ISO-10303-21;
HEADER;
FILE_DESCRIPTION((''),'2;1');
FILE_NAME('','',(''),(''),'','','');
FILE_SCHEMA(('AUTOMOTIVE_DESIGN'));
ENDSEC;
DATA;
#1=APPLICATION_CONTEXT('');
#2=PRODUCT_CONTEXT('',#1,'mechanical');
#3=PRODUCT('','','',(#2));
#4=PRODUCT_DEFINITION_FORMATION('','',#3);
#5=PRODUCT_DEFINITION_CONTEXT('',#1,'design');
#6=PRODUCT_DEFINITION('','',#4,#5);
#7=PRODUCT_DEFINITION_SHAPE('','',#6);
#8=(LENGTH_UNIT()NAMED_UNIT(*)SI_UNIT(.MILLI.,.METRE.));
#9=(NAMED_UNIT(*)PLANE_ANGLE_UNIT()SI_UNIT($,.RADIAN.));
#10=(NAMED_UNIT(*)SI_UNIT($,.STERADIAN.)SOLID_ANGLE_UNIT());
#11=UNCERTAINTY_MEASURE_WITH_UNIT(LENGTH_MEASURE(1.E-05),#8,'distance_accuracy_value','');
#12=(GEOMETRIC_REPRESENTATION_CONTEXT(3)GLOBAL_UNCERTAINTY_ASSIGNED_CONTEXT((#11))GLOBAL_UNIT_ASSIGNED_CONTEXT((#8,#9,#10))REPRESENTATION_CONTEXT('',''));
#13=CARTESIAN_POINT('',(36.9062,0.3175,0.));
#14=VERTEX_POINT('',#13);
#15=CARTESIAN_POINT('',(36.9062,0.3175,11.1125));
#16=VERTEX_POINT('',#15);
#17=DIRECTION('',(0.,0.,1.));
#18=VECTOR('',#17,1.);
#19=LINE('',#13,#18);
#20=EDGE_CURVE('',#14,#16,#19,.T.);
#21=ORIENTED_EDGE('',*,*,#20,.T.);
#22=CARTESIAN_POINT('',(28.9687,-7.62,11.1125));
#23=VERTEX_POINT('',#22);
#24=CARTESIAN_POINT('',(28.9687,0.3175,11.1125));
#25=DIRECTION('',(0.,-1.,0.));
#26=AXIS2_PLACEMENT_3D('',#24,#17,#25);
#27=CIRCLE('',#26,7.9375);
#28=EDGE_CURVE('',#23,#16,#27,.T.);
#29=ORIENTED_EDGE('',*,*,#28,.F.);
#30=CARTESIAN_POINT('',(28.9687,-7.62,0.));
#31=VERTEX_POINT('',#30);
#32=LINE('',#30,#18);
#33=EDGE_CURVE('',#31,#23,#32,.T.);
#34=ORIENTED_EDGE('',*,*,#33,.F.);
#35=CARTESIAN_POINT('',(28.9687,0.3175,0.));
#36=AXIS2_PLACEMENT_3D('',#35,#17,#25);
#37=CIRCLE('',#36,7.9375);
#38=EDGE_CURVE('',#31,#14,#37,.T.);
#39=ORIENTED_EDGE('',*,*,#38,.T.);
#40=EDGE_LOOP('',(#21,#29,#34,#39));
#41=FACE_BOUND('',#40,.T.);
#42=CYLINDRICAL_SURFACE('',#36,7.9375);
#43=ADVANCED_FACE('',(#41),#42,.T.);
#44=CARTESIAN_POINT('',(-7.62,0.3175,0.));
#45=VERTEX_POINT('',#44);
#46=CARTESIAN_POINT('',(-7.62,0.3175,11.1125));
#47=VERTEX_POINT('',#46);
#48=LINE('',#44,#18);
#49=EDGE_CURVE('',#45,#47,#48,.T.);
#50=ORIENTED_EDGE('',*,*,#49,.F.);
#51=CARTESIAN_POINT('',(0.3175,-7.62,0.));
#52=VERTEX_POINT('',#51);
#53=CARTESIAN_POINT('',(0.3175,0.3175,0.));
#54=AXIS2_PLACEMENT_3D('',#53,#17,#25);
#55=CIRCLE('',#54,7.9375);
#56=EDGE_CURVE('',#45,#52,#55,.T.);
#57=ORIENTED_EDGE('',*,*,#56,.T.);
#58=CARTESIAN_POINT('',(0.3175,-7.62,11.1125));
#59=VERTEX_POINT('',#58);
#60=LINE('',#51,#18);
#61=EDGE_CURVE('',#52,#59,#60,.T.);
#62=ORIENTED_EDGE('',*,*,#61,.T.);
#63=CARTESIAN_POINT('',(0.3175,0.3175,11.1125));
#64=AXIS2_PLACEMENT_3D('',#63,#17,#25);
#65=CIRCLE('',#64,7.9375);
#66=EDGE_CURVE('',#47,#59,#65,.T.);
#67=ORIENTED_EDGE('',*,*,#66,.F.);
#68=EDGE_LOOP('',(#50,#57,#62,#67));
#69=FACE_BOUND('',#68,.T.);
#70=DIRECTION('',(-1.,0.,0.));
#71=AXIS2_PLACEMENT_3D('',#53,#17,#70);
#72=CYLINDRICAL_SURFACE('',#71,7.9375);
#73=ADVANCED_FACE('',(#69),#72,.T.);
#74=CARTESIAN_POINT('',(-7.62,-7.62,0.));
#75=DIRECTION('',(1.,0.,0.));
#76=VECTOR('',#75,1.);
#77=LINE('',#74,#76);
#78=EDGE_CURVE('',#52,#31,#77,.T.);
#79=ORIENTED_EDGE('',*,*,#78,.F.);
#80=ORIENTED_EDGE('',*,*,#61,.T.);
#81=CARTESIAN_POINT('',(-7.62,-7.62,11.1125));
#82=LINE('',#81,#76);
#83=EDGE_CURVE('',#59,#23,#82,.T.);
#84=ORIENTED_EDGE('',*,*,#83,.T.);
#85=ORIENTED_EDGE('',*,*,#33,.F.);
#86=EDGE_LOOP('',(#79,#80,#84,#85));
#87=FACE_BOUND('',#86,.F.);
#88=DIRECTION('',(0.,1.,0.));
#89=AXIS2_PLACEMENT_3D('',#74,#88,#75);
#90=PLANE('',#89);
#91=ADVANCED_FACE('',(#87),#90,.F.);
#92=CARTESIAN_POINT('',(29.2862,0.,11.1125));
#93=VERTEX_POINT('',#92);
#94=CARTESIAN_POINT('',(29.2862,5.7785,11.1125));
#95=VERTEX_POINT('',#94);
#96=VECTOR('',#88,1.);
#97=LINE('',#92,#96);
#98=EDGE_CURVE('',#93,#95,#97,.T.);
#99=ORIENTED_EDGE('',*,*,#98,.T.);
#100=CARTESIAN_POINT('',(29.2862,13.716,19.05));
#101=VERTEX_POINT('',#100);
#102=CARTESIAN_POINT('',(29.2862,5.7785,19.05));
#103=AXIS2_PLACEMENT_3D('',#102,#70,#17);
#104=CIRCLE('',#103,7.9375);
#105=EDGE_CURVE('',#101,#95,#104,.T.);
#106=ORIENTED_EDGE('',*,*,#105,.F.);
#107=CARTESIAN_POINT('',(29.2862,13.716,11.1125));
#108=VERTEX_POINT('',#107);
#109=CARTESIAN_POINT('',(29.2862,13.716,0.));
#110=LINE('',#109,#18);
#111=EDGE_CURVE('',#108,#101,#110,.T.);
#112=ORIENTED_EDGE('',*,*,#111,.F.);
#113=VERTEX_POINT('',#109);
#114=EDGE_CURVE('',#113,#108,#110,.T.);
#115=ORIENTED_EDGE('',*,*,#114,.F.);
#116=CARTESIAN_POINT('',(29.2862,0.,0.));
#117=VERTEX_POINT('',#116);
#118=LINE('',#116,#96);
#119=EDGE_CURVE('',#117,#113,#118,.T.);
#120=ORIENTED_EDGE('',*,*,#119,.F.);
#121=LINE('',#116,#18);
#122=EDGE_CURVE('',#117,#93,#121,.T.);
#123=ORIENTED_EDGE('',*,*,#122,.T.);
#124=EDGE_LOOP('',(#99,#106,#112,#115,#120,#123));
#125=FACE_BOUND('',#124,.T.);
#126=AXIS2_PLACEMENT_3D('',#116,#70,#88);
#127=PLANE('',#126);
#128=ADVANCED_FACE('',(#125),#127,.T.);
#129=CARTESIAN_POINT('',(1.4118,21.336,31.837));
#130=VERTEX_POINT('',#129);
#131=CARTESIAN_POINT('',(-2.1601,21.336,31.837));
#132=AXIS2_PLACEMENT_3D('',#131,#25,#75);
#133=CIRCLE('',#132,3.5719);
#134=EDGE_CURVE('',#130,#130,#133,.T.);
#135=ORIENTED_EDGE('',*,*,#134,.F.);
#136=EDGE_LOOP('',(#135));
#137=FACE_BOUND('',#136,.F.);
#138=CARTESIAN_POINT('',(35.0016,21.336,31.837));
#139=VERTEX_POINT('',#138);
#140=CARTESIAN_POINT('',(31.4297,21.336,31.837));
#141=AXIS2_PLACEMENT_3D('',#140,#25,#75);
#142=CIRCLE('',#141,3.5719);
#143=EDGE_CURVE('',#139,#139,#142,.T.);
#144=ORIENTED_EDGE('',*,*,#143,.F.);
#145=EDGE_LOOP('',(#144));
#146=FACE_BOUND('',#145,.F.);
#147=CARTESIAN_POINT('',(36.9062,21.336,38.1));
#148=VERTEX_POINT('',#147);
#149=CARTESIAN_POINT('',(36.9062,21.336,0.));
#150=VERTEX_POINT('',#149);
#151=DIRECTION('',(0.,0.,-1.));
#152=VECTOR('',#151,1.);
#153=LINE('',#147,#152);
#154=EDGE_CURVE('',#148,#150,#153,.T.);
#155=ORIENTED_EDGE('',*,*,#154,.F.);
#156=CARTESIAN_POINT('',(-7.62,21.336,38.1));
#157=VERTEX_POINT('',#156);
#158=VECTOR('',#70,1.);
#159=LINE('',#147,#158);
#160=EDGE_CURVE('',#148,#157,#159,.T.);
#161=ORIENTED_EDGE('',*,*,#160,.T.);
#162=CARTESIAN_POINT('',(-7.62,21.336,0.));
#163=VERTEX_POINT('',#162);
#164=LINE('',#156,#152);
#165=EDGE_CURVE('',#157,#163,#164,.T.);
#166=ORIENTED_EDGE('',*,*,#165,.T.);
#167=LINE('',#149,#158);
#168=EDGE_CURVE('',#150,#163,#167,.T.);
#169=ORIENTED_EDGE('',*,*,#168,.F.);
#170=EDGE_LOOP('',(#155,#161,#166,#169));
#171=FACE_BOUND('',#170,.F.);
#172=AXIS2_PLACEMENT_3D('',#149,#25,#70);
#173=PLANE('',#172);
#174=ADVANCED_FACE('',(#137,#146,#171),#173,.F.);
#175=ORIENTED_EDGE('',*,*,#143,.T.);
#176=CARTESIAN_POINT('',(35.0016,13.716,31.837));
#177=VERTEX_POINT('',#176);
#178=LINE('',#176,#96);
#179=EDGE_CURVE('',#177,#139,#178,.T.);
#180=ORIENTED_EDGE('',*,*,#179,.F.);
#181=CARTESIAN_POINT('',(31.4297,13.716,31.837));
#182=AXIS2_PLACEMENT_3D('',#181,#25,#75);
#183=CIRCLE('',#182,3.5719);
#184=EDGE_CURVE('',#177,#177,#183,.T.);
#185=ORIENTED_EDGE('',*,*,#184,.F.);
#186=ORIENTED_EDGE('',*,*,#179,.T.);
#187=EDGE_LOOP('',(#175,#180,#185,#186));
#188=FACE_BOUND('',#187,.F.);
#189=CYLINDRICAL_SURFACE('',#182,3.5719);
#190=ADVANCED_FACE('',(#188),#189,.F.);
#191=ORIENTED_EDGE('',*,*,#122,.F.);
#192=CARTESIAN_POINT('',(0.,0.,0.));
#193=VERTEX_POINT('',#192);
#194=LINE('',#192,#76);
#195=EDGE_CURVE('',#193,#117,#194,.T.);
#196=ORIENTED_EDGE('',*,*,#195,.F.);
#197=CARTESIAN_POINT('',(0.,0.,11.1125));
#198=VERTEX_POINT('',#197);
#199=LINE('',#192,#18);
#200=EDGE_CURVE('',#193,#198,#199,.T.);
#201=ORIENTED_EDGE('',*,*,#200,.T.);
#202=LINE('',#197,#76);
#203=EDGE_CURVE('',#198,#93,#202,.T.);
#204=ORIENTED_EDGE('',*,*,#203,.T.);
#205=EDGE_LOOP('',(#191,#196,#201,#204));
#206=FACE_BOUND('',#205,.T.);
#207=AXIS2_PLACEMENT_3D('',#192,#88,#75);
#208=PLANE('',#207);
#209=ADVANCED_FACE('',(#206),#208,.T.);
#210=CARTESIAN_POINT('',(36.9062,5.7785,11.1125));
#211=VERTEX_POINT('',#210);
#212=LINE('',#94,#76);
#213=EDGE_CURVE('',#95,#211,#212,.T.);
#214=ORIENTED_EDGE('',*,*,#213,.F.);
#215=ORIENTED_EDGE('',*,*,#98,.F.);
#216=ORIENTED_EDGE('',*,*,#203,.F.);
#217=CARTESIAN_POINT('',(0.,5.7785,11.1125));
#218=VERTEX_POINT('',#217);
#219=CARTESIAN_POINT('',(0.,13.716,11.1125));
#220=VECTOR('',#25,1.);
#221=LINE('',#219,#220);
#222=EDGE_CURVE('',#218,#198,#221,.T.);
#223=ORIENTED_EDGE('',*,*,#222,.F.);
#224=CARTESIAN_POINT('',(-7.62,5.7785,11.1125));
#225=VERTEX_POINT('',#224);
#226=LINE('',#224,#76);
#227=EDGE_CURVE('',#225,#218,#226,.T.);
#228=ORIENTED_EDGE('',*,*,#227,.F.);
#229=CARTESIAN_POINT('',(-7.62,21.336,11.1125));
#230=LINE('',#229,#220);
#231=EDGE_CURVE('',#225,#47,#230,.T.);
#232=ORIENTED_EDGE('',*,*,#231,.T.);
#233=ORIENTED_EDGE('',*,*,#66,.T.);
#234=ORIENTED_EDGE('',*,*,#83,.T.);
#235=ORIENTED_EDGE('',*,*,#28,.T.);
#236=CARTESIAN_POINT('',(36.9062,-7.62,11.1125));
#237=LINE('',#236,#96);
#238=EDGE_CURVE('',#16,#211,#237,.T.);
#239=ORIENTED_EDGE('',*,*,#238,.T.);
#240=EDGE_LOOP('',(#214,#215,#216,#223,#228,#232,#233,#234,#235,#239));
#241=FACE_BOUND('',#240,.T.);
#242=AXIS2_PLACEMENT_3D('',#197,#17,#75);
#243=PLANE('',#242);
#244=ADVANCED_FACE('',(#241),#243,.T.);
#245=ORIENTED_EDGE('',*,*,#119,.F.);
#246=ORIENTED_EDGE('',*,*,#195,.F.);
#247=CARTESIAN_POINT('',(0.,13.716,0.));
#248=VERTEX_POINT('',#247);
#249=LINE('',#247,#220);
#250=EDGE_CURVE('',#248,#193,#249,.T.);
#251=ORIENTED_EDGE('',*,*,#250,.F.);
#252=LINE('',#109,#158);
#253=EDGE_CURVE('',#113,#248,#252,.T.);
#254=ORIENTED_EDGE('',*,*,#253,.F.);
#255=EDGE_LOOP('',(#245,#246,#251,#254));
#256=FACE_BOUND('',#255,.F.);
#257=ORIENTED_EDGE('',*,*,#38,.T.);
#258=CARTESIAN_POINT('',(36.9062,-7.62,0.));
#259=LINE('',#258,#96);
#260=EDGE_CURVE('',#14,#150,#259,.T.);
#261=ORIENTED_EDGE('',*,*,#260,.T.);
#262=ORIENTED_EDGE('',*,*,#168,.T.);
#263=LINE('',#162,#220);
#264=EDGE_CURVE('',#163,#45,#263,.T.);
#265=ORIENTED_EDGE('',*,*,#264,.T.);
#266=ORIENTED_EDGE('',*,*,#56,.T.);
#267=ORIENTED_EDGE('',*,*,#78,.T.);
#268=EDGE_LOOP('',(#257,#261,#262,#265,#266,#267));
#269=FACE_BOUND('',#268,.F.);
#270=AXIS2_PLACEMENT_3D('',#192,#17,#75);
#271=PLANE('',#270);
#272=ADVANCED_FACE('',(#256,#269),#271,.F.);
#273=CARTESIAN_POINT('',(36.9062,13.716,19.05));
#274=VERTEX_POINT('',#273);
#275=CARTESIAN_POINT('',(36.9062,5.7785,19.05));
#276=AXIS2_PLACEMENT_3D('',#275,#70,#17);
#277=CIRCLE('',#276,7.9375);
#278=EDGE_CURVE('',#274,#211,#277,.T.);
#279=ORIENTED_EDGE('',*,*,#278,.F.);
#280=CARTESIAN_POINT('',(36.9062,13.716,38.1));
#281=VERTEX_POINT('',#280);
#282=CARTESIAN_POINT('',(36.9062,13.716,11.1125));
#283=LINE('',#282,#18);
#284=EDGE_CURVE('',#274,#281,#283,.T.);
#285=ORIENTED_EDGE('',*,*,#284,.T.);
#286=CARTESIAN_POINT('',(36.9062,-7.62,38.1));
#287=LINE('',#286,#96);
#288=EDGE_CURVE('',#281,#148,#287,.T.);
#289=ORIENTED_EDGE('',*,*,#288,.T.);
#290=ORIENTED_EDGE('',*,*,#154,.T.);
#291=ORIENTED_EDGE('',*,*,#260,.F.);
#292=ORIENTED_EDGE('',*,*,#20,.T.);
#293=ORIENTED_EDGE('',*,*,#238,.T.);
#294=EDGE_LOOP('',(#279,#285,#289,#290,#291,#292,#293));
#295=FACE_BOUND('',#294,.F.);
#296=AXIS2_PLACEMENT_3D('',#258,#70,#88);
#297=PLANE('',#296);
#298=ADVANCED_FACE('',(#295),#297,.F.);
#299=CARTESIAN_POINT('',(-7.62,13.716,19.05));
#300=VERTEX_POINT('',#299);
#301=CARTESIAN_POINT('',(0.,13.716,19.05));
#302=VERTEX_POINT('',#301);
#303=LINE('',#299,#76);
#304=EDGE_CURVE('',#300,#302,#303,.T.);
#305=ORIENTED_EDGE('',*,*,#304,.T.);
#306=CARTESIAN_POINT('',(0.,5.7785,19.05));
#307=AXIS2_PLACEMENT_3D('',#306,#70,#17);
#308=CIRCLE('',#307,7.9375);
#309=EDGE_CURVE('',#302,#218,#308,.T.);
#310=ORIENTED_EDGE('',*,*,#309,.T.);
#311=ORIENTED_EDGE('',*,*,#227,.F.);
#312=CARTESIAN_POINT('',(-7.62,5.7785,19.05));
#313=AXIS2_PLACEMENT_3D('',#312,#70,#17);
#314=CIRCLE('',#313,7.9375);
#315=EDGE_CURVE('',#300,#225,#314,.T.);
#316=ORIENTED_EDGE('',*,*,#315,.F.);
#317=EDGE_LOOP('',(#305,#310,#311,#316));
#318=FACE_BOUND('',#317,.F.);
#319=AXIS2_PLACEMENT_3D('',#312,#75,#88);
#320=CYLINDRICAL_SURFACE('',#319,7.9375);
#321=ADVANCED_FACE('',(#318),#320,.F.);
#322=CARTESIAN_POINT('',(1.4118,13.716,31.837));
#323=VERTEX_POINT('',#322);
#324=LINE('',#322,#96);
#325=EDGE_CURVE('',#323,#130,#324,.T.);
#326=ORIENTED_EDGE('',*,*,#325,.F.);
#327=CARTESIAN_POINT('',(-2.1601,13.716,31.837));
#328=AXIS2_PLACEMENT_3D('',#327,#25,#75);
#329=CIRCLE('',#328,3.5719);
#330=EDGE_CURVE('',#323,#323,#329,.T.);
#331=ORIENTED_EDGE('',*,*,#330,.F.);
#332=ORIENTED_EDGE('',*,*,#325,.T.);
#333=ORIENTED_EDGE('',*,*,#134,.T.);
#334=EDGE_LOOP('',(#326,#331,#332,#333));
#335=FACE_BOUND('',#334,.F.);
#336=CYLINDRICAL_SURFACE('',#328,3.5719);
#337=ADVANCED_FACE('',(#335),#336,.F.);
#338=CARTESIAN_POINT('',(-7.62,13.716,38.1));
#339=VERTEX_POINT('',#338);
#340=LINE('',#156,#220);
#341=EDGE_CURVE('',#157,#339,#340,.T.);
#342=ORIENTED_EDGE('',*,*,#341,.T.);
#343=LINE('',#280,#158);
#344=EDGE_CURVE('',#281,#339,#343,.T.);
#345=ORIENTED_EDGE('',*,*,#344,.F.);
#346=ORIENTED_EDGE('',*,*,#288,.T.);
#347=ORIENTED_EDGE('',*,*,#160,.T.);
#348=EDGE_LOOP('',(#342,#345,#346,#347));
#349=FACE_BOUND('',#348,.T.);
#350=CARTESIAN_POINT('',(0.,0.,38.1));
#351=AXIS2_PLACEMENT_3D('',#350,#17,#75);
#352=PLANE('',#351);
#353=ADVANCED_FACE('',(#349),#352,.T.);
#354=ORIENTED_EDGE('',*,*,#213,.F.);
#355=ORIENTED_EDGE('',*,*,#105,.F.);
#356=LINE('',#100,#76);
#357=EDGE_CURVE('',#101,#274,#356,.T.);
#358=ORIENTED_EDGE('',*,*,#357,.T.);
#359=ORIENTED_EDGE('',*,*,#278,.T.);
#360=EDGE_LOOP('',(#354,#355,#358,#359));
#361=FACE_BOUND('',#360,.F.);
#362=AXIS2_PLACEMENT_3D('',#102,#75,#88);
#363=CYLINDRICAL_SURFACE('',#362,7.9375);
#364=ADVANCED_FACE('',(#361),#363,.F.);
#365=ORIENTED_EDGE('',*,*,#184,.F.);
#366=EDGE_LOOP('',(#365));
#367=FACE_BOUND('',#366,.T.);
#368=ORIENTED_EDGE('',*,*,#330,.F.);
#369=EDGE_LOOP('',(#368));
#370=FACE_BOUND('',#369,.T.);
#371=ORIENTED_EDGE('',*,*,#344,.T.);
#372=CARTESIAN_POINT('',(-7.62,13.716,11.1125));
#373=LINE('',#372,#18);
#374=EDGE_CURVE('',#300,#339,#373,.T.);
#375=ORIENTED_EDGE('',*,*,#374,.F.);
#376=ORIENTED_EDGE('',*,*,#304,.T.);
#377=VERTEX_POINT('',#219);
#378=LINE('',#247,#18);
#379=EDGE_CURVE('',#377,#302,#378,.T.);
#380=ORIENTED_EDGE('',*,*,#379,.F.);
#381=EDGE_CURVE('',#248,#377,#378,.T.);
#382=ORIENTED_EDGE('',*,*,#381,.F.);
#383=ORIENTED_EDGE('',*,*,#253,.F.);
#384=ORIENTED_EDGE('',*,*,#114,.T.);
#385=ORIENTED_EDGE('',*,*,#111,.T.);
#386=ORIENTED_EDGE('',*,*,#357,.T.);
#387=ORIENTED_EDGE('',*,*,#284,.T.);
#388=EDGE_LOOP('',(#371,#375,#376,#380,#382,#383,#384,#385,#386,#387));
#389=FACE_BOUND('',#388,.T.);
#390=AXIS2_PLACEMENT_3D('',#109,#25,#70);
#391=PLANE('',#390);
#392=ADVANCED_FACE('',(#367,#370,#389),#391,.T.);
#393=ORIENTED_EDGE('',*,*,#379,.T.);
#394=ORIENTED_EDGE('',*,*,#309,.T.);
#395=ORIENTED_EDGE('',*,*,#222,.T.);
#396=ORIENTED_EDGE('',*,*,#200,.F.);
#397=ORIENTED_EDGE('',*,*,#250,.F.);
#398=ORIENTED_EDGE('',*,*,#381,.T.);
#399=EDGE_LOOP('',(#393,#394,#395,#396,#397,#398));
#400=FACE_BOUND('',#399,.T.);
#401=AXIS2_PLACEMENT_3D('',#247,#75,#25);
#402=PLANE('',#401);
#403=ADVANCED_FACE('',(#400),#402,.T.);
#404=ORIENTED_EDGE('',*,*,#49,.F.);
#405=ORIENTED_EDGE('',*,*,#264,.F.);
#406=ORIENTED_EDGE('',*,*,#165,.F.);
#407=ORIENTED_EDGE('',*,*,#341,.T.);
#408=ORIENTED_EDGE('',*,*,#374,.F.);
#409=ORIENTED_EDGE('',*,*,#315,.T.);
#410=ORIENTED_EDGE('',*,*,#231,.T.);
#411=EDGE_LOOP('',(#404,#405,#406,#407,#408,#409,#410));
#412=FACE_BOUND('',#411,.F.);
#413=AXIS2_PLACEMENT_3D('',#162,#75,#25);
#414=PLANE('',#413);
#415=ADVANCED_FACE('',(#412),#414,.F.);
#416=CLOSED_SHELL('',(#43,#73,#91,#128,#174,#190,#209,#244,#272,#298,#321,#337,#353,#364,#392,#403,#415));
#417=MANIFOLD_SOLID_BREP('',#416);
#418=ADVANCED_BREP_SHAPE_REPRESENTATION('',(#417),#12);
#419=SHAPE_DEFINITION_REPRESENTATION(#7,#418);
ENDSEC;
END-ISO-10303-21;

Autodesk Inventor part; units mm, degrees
ref_plane "YZ Plane" through (0, 0, 0) normal (1, 0, 0) x (0, 1, 0)
ref_plane "XZ Plane" through (0, 0, 0) normal (0, 1, 0) x (-1, 0, 0)
ref_plane "XY Plane" through (0, 0, 0) normal (0, 0, 1) x (1, 0, 0)
sketch "Sketch1" plane through (0, 0, 0) normal (0, 0, 1) x (1, 0, 0)
  line L0 (0, 0) -> (29.2862, 0)
  line L1 (29.2862, 0) -> (29.2862, 13.716)
  line L2 (29.2862, 13.716) -> (0, 13.716)
  line L3 (0, 13.716) -> (0, 0)
  line L4 (14.6431, 13.716) -> (14.6431, 0) construction
  line L5 (0, 6.858) -> (29.2862, 6.858) construction
  line L6 (-7.62, -7.62) -> (36.9062, -7.62)
  line L7 (36.9062, -7.62) -> (36.9062, 21.336)
  line L8 (36.9062, 21.336) -> (-7.62, 21.336)
  line L9 (-7.62, 21.336) -> (-7.62, -7.62)
  line L10 (-7.62, -7.62) -> (36.9062, 21.336) construction
  line L11 (36.9062, -7.62) -> (-7.62, 21.336) construction
  point P0 (14.6431, 6.858)
  dimension "d0" = 29.2862
  dimension "d1" = 13.716
  dimension "d2" = 7.62
  dimension "d3" = 7.62
extrude "Extrusion1" add sketch "Sketch1" along normal blind 11.1125
sketch "Sketch2" plane through (0, 0, 11.1125) normal (0, 0, 1) x (1, 0, 0)
  line L0 (0, 13.716) -> (29.2862, 13.716) projected
  line L1 (36.9062, -7.62) -> (36.9062, 21.336) projected
  line L2 (36.9062, 21.336) -> (-7.62, 21.336) projected
  line L3 (-7.62, 21.336) -> (-7.62, -7.62) projected
  line L4 (-7.62, 13.716) -> (0, 13.716)
  line L5 (29.2862, 13.716) -> (36.9062, 13.716)
extrude "Extrusion2" add sketch "Sketch2" along normal blind 26.9875
sketch "Sketch3" plane through (0, 13.716, 0) normal (0, -1, 0) x (1, 0, 0)
  line L0 (36.9062, 11.1125) -> (36.9062, 38.1) projected
  line L1 (-7.62, 11.1125) -> (-7.62, 38.1) projected
  line L2 (-7.62, 31.837) -> (36.9062, 31.837) construction
  circle A0 centre (-2.1601, 31.837) radius 3.5719
  circle A1 centre (31.4297, 31.837) radius 3.5719
  dimension "d8" = 7.1437
  dimension "d9" = 7.1437
extrude "Extrusion3" cut sketch "Sketch3" against normal through all
fillet "Fillet1" radius 7.9375 2 edges at (33.0962, 13.716, 11.1125) (-3.81, 13.716, 11.1125)
fillet "Fillet2" radius 7.9375 2 edges at (-7.62, -7.62, 5.5563) (36.9062, -7.62, 5.5563)
properties part number "switch Holder"
